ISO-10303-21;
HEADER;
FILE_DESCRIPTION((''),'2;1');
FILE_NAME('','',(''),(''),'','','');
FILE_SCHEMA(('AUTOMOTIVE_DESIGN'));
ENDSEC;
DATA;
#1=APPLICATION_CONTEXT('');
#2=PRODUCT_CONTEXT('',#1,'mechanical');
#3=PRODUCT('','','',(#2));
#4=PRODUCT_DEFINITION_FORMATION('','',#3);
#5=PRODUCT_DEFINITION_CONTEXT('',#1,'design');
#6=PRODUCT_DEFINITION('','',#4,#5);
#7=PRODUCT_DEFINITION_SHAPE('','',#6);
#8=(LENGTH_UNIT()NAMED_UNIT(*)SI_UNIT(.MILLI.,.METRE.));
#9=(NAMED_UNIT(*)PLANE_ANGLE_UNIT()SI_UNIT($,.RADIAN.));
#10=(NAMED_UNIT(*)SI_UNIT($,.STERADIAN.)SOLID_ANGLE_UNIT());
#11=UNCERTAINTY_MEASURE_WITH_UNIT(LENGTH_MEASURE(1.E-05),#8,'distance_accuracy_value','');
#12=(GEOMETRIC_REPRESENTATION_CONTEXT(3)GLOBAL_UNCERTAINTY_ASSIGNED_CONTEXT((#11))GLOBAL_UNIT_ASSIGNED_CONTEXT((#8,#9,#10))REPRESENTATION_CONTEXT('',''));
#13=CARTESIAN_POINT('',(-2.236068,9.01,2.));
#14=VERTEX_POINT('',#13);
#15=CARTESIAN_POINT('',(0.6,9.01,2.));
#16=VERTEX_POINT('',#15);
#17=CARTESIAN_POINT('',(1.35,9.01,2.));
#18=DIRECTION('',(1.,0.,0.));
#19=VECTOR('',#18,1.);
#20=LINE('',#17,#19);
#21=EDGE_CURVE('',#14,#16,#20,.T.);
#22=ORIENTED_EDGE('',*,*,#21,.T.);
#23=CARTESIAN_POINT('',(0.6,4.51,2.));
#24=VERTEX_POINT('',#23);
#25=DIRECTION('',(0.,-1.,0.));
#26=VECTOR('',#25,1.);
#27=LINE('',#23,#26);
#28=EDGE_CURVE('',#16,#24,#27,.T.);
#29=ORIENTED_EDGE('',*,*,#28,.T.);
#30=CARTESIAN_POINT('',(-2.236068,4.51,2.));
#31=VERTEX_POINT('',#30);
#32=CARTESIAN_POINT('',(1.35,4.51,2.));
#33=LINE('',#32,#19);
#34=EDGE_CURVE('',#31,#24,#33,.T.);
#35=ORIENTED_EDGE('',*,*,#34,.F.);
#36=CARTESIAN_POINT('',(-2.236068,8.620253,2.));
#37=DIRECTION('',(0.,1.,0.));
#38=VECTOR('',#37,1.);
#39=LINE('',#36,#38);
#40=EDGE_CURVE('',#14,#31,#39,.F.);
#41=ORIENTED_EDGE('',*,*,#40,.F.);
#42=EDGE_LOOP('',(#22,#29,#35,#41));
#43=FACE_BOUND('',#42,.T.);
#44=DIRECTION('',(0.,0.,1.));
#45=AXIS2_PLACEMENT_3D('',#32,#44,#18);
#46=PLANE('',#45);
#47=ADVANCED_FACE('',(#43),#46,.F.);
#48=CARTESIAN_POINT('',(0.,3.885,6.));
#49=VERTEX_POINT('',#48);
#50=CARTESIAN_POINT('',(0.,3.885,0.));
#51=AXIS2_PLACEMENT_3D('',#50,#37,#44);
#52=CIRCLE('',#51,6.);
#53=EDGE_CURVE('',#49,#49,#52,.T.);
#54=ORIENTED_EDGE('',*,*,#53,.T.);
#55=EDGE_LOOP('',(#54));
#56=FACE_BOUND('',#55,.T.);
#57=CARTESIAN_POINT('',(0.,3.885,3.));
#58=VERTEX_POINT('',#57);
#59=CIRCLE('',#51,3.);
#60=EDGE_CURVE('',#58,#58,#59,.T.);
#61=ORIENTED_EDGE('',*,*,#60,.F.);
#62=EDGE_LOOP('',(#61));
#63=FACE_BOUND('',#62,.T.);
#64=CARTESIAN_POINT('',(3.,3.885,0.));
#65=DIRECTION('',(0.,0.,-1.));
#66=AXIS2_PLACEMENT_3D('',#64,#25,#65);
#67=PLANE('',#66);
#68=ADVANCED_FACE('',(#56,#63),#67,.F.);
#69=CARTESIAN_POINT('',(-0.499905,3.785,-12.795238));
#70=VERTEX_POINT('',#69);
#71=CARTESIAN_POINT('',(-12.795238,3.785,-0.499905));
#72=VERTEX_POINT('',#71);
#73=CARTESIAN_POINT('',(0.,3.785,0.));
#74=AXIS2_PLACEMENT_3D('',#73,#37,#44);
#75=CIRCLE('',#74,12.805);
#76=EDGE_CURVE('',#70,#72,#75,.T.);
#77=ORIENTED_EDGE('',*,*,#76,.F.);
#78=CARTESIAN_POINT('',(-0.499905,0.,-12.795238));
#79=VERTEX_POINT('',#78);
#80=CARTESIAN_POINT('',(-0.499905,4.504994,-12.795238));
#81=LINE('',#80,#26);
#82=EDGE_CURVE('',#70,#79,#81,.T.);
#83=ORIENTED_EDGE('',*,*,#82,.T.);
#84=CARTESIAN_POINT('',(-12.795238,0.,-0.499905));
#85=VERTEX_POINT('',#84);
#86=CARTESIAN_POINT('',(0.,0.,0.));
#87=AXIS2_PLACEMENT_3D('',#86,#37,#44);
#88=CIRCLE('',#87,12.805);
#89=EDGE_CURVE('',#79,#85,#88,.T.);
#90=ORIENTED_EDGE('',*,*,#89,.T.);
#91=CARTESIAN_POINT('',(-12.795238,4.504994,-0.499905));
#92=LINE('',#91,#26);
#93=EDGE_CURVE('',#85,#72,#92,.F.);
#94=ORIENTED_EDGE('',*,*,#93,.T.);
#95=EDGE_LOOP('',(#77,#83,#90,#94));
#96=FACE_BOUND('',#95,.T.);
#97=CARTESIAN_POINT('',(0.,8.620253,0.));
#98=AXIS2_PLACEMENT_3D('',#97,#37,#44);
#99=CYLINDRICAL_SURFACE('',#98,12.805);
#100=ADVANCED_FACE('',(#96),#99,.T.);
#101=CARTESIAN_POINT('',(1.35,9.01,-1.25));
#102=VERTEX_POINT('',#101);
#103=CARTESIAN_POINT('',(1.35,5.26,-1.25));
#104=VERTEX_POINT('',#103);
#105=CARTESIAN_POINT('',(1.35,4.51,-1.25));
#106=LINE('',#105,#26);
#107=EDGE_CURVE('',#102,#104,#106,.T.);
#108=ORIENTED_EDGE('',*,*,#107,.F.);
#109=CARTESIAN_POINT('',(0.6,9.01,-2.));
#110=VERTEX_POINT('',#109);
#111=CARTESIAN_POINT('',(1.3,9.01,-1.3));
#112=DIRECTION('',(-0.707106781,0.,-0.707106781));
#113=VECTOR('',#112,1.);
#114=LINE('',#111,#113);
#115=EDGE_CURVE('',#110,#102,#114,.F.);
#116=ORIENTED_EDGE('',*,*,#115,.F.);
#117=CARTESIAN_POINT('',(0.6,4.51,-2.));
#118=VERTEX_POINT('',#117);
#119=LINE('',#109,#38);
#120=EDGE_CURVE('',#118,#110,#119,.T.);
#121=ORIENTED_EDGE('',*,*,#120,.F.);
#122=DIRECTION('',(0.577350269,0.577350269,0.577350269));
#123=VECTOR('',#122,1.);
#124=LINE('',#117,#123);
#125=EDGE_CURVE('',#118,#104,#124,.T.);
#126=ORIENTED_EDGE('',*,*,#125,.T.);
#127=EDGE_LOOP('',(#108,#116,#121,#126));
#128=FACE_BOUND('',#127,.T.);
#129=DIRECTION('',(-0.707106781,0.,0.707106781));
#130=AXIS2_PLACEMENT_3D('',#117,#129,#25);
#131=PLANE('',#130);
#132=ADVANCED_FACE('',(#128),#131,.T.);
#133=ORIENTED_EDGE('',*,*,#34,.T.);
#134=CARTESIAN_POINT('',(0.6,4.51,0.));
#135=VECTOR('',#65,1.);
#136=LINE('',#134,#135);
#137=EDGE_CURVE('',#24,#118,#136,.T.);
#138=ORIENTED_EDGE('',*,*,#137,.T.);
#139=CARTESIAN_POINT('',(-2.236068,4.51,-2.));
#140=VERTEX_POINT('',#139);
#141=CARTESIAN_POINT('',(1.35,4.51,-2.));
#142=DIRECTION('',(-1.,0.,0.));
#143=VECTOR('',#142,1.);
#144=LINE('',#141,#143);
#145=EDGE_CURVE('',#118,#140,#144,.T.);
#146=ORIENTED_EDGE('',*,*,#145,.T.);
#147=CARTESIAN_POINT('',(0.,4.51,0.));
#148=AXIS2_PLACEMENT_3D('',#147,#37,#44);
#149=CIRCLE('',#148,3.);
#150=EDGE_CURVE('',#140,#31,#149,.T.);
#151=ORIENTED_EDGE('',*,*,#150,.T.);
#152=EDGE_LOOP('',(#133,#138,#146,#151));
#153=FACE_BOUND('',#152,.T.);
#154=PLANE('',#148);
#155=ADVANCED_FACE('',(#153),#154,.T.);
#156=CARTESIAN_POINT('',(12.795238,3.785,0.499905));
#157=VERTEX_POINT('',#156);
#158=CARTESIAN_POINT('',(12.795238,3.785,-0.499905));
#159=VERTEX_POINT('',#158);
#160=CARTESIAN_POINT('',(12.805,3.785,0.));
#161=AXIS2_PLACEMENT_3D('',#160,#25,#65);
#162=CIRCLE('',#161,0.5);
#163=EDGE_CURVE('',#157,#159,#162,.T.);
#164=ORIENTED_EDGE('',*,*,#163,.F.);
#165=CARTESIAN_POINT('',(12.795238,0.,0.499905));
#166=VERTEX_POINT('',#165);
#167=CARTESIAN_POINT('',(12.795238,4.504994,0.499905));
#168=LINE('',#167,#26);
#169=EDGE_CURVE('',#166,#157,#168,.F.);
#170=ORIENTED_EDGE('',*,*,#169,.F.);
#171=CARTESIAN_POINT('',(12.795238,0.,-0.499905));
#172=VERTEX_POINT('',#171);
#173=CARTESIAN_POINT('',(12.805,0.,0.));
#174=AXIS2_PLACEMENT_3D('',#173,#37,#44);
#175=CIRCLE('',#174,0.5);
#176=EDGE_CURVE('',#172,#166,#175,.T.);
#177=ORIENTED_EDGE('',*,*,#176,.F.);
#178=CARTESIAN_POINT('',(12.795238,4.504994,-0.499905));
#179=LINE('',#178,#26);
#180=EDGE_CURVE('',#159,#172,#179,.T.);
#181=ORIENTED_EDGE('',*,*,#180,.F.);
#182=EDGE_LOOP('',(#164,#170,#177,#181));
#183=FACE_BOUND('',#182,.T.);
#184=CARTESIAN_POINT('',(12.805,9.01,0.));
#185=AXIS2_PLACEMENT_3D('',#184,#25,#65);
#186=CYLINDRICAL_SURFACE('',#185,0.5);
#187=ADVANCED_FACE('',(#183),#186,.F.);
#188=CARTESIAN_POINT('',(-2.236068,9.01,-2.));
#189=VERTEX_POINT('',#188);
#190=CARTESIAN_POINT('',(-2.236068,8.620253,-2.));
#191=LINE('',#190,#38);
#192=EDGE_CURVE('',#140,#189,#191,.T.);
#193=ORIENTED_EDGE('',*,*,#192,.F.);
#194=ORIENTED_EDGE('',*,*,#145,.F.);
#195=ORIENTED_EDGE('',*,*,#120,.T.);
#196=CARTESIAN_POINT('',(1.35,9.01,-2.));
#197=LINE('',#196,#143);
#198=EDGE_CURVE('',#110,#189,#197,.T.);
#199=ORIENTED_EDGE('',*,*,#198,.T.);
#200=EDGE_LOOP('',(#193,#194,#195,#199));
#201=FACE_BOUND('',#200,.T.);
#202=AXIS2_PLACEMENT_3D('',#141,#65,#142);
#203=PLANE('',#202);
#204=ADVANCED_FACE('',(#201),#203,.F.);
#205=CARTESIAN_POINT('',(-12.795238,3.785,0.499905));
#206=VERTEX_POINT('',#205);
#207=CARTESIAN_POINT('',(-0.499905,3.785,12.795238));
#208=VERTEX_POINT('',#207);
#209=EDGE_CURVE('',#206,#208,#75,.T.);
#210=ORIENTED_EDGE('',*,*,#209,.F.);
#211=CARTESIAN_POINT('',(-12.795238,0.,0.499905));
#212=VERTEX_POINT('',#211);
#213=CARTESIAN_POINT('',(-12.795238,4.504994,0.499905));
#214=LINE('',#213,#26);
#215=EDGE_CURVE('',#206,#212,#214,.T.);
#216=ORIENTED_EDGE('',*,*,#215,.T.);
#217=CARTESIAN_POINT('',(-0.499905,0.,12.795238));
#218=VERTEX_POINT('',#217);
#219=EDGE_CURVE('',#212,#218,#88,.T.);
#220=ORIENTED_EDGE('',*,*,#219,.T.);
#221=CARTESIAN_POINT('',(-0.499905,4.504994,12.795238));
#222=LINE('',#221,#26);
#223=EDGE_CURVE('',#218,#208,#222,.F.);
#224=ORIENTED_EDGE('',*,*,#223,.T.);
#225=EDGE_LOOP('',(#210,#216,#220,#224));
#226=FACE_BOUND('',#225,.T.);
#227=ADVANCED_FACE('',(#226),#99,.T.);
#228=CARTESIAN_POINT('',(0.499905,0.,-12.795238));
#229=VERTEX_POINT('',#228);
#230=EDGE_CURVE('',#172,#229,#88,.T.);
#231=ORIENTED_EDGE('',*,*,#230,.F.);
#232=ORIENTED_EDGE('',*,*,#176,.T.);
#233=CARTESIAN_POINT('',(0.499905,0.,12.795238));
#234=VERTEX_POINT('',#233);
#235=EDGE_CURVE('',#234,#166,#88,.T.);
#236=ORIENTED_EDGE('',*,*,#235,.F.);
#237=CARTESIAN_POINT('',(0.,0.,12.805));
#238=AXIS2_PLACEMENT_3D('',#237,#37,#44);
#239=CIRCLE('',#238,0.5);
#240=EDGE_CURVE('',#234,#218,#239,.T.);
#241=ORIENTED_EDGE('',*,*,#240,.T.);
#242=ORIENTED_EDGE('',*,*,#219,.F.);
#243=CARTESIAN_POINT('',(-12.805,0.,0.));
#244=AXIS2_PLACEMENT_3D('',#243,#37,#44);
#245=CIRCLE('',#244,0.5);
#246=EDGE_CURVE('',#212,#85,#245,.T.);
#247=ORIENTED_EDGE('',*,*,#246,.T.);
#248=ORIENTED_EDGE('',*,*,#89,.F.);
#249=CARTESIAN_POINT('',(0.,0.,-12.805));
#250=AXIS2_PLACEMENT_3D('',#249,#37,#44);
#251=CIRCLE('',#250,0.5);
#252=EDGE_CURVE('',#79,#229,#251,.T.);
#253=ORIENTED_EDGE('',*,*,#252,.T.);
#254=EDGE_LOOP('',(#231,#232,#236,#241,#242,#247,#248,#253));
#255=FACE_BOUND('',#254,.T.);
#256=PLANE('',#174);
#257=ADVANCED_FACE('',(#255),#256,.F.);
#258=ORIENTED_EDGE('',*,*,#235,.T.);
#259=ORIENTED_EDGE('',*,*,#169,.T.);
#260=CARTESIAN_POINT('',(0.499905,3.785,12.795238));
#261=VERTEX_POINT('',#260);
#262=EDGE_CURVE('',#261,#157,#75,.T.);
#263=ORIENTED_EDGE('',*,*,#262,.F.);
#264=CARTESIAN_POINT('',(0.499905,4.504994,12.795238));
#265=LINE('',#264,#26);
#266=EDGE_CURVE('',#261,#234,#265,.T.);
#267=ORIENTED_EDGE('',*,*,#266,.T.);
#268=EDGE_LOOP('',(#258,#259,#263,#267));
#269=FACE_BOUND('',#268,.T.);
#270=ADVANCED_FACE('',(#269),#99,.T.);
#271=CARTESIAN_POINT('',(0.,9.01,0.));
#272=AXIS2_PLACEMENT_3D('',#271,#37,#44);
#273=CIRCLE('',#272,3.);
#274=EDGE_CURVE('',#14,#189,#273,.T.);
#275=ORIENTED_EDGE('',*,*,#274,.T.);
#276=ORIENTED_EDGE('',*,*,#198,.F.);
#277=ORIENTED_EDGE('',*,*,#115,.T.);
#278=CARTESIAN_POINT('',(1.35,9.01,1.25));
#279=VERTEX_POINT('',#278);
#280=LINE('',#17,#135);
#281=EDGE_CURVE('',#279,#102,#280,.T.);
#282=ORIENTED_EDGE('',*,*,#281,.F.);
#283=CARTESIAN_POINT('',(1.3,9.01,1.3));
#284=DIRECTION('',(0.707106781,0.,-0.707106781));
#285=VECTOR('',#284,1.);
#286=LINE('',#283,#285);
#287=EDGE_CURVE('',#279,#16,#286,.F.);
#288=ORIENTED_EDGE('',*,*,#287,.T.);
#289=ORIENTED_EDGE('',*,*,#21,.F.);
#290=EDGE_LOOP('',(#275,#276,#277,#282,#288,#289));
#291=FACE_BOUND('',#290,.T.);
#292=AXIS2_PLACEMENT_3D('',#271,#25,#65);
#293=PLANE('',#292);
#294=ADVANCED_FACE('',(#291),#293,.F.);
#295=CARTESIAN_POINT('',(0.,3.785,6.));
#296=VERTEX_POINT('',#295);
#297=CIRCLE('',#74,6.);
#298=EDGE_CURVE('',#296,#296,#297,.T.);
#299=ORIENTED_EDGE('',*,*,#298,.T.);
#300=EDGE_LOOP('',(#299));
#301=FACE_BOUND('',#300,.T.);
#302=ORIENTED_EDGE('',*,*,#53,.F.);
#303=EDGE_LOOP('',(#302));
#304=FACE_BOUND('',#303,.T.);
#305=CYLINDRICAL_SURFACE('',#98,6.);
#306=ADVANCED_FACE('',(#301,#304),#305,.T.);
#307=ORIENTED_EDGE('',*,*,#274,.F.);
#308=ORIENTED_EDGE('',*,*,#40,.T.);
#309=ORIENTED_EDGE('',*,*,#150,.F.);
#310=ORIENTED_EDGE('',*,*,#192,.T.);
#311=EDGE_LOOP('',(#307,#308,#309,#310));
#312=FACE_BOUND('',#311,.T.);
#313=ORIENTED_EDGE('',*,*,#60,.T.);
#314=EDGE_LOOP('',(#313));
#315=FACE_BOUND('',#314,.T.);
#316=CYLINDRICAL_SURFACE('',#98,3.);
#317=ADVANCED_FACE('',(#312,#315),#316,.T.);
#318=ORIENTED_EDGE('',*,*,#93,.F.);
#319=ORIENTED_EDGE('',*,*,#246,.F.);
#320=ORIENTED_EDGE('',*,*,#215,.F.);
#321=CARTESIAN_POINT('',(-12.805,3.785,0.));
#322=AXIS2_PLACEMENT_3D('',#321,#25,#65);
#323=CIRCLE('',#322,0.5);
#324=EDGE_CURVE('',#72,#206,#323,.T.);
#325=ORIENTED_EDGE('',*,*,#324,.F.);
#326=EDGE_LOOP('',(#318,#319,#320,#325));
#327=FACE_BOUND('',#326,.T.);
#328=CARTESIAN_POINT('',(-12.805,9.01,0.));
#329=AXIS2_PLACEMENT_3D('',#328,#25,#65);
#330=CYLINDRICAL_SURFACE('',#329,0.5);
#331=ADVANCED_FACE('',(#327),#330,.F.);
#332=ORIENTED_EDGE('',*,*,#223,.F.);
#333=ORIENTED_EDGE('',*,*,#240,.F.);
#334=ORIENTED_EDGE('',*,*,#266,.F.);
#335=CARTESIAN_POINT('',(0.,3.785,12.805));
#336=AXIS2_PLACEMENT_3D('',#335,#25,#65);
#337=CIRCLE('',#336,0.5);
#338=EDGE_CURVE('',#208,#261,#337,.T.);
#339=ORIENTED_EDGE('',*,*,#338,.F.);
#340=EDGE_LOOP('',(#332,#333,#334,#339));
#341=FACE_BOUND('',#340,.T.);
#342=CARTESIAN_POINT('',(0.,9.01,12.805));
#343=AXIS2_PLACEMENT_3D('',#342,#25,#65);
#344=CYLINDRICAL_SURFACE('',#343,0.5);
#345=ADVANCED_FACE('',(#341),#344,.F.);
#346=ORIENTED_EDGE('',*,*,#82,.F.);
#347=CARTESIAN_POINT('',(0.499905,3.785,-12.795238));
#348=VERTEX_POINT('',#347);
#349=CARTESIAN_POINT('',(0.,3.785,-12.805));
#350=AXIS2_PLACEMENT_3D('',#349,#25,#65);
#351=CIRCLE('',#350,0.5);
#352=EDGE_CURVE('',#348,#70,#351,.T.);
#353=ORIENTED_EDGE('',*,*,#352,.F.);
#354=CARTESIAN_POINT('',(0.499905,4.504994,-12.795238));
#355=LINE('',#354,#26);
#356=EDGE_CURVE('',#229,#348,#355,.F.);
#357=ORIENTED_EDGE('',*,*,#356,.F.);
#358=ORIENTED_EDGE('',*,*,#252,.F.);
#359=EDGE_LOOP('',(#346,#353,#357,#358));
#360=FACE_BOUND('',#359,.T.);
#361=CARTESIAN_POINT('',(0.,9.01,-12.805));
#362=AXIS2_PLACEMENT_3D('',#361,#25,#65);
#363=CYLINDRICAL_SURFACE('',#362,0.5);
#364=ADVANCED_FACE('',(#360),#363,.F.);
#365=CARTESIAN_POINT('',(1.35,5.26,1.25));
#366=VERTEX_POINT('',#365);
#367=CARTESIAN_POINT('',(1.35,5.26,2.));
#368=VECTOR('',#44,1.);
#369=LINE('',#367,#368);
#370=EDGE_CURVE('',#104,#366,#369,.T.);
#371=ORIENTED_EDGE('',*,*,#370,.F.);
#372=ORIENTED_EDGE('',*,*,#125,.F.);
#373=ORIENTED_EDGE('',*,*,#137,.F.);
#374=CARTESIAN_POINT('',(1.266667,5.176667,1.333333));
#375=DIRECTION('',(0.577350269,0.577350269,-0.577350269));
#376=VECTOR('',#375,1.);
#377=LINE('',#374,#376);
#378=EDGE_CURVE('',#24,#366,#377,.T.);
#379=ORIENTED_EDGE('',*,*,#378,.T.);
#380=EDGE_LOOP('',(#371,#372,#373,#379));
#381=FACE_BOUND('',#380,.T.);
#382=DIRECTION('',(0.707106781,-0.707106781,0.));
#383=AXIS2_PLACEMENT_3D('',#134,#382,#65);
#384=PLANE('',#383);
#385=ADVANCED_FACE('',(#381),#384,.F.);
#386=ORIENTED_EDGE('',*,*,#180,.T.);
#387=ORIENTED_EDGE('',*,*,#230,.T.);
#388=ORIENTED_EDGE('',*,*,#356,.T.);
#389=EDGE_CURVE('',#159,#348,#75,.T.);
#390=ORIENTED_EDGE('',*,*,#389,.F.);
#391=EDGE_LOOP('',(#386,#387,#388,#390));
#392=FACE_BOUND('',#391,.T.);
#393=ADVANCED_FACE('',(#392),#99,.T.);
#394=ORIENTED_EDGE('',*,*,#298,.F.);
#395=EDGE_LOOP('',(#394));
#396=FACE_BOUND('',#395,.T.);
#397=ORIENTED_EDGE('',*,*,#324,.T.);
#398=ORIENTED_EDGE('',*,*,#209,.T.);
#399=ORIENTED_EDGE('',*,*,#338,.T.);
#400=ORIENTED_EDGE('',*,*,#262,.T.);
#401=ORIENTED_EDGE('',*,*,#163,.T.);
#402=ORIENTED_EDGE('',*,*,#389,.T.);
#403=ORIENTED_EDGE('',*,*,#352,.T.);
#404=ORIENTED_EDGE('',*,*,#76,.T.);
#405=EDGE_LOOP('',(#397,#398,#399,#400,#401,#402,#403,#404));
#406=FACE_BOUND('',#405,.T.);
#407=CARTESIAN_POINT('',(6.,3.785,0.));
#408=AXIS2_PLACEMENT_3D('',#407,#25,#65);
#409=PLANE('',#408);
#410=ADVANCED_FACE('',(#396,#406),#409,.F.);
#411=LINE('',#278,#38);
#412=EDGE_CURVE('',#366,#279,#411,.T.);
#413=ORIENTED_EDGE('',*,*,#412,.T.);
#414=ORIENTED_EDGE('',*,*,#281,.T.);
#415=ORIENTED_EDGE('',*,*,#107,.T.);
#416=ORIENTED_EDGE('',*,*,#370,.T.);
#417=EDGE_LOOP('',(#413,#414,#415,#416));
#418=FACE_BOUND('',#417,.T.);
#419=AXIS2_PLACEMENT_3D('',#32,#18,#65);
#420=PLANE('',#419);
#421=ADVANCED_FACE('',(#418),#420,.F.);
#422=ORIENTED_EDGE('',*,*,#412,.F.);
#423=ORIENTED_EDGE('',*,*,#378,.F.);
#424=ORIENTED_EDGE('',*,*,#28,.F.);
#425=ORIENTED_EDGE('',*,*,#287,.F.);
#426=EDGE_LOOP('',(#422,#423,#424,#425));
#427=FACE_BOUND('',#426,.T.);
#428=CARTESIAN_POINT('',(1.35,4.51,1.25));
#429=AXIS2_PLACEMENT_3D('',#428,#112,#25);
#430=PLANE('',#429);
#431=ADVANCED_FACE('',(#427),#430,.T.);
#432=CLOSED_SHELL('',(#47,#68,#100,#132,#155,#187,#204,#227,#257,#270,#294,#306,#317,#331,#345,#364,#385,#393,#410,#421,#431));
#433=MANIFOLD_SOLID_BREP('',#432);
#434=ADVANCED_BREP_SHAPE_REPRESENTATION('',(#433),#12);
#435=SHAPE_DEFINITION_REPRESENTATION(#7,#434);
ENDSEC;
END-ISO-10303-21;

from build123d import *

# Parameters (mm, degrees)
CUT_EXTRUDE1_START      = -4.5
CUT_EXTRUDE1_DEPTH      = 4.5
CHAMFER1_SIZE           = 0.75
CUT_EXTRUDE2_DEPTH      = 21.226619836
CUT_EXTRUDE2_DEPTH_BACK = 21.226619836
SKETCH3_R               = 0.5


# Read off the part's stored shape, not the designer's step: Cut-Extrude1
with BuildPart() as part:
    # Sketch1 → Revolve1 (revolve)
    with BuildSketch(Plane.XY, mode=Mode.PRIVATE) as revolve1_sk:
        Polygon((0, 9.01), (3, 9.01), (3, 3.885), (6, 3.885), (6, 3.785), (12.805, 3.785), (12.805, 0), (0, 0), align=None)
    revolve(revolve1_sk.sketch.rotate(Axis((0, 8.620253165, 0), (0, -1, 0)), 90), axis=Axis((0, 8.620253165, 0), (0, -1, 0)))

    # Cut-Extrude1 outline → Cut-Extrude1 (cut)
    with BuildSketch(Plane(origin=(0, 9.01, 0), x_dir=(1, 0, 0), z_dir=(0, 1, 0)).offset(CUT_EXTRUDE1_START)):
        with BuildLine():
            Line((1.35, -2), (1.35, 2))
            Line((1.35, 2), (-2.236067977, 2))
            ThreePointArc((-2.236067977, 2), (-3, 0), (-2.236067977, -2))
            Line((-2.236067977, -2), (1.35, -2))
        make_face()
    extrude(amount=CUT_EXTRUDE1_DEPTH, mode=Mode.SUBTRACT)

    # Chamfer1
    chamfer1_edges = [part.edges().sort_by_distance(p)[0] for p in [
        (1.35, 6.76, 2),
        (1.35, 4.51, 0),
        (1.35, 6.76, -2),
    ]]
    chamfer(chamfer1_edges, length=CHAMFER1_SIZE)

    # Sketch3 → Cut-Extrude2 (cut, two sides: drawn at the far end of the back side and taken through both)
    with BuildSketch(Plane.XZ.offset(-CUT_EXTRUDE2_DEPTH_BACK)):
        with Locations((0, -12.805)):
            Circle(SKETCH3_R)
        with Locations((-12.805, 0)):
            Circle(SKETCH3_R)
        with Locations((12.805, 0)):
            Circle(SKETCH3_R)
        with Locations((0, 12.805)):
            Circle(SKETCH3_R)
    extrude(amount=CUT_EXTRUDE2_DEPTH + CUT_EXTRUDE2_DEPTH_BACK, mode=Mode.SUBTRACT)


solid = part.part
